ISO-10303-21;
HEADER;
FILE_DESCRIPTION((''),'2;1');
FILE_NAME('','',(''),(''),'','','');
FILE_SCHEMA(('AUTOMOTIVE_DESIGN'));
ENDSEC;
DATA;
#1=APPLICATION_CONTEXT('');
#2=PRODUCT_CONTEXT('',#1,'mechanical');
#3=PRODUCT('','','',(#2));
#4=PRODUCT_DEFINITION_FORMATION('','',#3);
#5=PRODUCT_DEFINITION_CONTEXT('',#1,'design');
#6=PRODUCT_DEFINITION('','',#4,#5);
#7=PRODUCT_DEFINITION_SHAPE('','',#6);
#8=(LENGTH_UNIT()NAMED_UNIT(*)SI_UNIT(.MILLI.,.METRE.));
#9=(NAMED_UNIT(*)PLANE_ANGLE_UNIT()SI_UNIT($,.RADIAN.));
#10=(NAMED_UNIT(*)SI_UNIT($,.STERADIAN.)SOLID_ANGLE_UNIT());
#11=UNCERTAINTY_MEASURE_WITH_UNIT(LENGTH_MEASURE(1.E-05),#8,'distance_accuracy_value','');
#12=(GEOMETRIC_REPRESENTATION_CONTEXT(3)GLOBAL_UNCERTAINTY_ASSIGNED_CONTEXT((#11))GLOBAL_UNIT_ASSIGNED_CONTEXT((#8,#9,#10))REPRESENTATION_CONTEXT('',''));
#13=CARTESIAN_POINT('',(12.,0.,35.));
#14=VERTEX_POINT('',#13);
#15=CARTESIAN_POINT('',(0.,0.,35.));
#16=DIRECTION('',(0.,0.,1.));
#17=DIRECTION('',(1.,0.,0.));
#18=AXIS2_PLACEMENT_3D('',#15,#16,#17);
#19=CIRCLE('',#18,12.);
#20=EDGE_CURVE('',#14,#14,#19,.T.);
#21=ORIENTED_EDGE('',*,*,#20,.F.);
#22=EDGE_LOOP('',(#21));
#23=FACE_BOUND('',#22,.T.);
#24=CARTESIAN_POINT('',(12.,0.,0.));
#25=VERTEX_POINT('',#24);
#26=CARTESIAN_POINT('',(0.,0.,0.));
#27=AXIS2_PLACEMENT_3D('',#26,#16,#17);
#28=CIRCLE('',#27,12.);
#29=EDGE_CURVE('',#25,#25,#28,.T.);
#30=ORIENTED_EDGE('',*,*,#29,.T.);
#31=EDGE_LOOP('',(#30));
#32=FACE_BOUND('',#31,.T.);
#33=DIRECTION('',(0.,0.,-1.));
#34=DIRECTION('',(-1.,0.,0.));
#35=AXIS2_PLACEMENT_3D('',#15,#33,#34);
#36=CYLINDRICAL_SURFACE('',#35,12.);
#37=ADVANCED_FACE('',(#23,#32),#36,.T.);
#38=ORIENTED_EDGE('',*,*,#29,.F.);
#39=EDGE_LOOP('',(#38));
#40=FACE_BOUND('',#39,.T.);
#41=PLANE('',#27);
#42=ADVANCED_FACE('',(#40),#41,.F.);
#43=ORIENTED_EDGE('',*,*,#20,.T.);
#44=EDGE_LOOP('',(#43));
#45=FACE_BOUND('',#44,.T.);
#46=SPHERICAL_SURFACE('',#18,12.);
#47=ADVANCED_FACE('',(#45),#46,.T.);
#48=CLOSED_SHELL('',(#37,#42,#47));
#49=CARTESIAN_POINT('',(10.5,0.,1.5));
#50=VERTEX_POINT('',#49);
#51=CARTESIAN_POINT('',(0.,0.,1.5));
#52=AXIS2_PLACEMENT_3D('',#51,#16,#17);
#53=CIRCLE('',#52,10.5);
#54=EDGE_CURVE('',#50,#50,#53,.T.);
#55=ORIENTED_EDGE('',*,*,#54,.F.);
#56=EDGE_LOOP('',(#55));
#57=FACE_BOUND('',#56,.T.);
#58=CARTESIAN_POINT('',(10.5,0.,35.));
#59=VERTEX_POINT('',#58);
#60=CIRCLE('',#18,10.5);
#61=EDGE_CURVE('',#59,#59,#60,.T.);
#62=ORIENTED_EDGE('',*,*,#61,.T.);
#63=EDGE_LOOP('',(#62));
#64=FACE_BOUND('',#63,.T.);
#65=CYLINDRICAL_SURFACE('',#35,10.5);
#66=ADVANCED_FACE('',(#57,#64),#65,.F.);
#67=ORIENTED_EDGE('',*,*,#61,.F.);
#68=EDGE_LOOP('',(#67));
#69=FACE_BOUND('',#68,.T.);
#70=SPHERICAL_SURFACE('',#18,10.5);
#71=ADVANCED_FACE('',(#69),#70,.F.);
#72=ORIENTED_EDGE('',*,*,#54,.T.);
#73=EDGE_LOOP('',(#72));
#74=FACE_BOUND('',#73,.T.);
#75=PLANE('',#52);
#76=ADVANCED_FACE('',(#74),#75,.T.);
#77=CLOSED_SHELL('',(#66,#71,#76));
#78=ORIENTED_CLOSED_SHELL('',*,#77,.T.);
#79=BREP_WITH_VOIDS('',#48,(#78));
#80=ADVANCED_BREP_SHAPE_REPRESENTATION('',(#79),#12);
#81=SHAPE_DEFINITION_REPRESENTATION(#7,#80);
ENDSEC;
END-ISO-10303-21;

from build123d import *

# Parameters (mm, degrees)
SKETCH1_R           = 12
BOSS_EXTRUDE1_DEPTH = 35
DOME1_FACE_RADIUS   = 12
DOME1_HEIGHT        = 12


# Read off the part's stored shape, not the designer's step: Shell1
with BuildPart() as part:
    # Sketch1 → Boss-Extrude1 (new body)
    with BuildSketch(Plane.XY):
        Circle(SKETCH1_R)
    extrude(amount=BOSS_EXTRUDE1_DEPTH)

    # Dome1: a dome of height H over a round flat face of radius A is a cap of a sphere of radius (A * A + H * H) / (2 * H)
    dome1_r = (DOME1_FACE_RADIUS * DOME1_FACE_RADIUS + DOME1_HEIGHT * DOME1_HEIGHT) / (2 * DOME1_HEIGHT)
    dome1_base = Plane((0, 0, 35), z_dir=(0, 0, 1))
    with Locations(dome1_base.offset(DOME1_HEIGHT - dome1_r)):
        dome1_ball = Sphere(dome1_r, mode=Mode.PRIVATE)
    add(split(dome1_ball, bisect_by=dome1_base, keep=Keep.TOP, mode=Mode.PRIVATE))

    # Shell1 outline → Shell1 (revolve, cut)
    with BuildSketch(Plane.XZ):
        with BuildLine():
            Line((10.5, 1.5), (10.5, 34.999999989))
            ThreePointArc((10.5, 34.999999989), (7.424621206, 42.424621199), (0, 45.5))
            Line((0, 45.5), (0, 1.5))
            Line((0, 1.5), (10.5, 1.5))
        make_face()
    revolve(axis=Axis((0, 0, 0), (0, 0, 1)), mode=Mode.SUBTRACT)


solid = part.part
